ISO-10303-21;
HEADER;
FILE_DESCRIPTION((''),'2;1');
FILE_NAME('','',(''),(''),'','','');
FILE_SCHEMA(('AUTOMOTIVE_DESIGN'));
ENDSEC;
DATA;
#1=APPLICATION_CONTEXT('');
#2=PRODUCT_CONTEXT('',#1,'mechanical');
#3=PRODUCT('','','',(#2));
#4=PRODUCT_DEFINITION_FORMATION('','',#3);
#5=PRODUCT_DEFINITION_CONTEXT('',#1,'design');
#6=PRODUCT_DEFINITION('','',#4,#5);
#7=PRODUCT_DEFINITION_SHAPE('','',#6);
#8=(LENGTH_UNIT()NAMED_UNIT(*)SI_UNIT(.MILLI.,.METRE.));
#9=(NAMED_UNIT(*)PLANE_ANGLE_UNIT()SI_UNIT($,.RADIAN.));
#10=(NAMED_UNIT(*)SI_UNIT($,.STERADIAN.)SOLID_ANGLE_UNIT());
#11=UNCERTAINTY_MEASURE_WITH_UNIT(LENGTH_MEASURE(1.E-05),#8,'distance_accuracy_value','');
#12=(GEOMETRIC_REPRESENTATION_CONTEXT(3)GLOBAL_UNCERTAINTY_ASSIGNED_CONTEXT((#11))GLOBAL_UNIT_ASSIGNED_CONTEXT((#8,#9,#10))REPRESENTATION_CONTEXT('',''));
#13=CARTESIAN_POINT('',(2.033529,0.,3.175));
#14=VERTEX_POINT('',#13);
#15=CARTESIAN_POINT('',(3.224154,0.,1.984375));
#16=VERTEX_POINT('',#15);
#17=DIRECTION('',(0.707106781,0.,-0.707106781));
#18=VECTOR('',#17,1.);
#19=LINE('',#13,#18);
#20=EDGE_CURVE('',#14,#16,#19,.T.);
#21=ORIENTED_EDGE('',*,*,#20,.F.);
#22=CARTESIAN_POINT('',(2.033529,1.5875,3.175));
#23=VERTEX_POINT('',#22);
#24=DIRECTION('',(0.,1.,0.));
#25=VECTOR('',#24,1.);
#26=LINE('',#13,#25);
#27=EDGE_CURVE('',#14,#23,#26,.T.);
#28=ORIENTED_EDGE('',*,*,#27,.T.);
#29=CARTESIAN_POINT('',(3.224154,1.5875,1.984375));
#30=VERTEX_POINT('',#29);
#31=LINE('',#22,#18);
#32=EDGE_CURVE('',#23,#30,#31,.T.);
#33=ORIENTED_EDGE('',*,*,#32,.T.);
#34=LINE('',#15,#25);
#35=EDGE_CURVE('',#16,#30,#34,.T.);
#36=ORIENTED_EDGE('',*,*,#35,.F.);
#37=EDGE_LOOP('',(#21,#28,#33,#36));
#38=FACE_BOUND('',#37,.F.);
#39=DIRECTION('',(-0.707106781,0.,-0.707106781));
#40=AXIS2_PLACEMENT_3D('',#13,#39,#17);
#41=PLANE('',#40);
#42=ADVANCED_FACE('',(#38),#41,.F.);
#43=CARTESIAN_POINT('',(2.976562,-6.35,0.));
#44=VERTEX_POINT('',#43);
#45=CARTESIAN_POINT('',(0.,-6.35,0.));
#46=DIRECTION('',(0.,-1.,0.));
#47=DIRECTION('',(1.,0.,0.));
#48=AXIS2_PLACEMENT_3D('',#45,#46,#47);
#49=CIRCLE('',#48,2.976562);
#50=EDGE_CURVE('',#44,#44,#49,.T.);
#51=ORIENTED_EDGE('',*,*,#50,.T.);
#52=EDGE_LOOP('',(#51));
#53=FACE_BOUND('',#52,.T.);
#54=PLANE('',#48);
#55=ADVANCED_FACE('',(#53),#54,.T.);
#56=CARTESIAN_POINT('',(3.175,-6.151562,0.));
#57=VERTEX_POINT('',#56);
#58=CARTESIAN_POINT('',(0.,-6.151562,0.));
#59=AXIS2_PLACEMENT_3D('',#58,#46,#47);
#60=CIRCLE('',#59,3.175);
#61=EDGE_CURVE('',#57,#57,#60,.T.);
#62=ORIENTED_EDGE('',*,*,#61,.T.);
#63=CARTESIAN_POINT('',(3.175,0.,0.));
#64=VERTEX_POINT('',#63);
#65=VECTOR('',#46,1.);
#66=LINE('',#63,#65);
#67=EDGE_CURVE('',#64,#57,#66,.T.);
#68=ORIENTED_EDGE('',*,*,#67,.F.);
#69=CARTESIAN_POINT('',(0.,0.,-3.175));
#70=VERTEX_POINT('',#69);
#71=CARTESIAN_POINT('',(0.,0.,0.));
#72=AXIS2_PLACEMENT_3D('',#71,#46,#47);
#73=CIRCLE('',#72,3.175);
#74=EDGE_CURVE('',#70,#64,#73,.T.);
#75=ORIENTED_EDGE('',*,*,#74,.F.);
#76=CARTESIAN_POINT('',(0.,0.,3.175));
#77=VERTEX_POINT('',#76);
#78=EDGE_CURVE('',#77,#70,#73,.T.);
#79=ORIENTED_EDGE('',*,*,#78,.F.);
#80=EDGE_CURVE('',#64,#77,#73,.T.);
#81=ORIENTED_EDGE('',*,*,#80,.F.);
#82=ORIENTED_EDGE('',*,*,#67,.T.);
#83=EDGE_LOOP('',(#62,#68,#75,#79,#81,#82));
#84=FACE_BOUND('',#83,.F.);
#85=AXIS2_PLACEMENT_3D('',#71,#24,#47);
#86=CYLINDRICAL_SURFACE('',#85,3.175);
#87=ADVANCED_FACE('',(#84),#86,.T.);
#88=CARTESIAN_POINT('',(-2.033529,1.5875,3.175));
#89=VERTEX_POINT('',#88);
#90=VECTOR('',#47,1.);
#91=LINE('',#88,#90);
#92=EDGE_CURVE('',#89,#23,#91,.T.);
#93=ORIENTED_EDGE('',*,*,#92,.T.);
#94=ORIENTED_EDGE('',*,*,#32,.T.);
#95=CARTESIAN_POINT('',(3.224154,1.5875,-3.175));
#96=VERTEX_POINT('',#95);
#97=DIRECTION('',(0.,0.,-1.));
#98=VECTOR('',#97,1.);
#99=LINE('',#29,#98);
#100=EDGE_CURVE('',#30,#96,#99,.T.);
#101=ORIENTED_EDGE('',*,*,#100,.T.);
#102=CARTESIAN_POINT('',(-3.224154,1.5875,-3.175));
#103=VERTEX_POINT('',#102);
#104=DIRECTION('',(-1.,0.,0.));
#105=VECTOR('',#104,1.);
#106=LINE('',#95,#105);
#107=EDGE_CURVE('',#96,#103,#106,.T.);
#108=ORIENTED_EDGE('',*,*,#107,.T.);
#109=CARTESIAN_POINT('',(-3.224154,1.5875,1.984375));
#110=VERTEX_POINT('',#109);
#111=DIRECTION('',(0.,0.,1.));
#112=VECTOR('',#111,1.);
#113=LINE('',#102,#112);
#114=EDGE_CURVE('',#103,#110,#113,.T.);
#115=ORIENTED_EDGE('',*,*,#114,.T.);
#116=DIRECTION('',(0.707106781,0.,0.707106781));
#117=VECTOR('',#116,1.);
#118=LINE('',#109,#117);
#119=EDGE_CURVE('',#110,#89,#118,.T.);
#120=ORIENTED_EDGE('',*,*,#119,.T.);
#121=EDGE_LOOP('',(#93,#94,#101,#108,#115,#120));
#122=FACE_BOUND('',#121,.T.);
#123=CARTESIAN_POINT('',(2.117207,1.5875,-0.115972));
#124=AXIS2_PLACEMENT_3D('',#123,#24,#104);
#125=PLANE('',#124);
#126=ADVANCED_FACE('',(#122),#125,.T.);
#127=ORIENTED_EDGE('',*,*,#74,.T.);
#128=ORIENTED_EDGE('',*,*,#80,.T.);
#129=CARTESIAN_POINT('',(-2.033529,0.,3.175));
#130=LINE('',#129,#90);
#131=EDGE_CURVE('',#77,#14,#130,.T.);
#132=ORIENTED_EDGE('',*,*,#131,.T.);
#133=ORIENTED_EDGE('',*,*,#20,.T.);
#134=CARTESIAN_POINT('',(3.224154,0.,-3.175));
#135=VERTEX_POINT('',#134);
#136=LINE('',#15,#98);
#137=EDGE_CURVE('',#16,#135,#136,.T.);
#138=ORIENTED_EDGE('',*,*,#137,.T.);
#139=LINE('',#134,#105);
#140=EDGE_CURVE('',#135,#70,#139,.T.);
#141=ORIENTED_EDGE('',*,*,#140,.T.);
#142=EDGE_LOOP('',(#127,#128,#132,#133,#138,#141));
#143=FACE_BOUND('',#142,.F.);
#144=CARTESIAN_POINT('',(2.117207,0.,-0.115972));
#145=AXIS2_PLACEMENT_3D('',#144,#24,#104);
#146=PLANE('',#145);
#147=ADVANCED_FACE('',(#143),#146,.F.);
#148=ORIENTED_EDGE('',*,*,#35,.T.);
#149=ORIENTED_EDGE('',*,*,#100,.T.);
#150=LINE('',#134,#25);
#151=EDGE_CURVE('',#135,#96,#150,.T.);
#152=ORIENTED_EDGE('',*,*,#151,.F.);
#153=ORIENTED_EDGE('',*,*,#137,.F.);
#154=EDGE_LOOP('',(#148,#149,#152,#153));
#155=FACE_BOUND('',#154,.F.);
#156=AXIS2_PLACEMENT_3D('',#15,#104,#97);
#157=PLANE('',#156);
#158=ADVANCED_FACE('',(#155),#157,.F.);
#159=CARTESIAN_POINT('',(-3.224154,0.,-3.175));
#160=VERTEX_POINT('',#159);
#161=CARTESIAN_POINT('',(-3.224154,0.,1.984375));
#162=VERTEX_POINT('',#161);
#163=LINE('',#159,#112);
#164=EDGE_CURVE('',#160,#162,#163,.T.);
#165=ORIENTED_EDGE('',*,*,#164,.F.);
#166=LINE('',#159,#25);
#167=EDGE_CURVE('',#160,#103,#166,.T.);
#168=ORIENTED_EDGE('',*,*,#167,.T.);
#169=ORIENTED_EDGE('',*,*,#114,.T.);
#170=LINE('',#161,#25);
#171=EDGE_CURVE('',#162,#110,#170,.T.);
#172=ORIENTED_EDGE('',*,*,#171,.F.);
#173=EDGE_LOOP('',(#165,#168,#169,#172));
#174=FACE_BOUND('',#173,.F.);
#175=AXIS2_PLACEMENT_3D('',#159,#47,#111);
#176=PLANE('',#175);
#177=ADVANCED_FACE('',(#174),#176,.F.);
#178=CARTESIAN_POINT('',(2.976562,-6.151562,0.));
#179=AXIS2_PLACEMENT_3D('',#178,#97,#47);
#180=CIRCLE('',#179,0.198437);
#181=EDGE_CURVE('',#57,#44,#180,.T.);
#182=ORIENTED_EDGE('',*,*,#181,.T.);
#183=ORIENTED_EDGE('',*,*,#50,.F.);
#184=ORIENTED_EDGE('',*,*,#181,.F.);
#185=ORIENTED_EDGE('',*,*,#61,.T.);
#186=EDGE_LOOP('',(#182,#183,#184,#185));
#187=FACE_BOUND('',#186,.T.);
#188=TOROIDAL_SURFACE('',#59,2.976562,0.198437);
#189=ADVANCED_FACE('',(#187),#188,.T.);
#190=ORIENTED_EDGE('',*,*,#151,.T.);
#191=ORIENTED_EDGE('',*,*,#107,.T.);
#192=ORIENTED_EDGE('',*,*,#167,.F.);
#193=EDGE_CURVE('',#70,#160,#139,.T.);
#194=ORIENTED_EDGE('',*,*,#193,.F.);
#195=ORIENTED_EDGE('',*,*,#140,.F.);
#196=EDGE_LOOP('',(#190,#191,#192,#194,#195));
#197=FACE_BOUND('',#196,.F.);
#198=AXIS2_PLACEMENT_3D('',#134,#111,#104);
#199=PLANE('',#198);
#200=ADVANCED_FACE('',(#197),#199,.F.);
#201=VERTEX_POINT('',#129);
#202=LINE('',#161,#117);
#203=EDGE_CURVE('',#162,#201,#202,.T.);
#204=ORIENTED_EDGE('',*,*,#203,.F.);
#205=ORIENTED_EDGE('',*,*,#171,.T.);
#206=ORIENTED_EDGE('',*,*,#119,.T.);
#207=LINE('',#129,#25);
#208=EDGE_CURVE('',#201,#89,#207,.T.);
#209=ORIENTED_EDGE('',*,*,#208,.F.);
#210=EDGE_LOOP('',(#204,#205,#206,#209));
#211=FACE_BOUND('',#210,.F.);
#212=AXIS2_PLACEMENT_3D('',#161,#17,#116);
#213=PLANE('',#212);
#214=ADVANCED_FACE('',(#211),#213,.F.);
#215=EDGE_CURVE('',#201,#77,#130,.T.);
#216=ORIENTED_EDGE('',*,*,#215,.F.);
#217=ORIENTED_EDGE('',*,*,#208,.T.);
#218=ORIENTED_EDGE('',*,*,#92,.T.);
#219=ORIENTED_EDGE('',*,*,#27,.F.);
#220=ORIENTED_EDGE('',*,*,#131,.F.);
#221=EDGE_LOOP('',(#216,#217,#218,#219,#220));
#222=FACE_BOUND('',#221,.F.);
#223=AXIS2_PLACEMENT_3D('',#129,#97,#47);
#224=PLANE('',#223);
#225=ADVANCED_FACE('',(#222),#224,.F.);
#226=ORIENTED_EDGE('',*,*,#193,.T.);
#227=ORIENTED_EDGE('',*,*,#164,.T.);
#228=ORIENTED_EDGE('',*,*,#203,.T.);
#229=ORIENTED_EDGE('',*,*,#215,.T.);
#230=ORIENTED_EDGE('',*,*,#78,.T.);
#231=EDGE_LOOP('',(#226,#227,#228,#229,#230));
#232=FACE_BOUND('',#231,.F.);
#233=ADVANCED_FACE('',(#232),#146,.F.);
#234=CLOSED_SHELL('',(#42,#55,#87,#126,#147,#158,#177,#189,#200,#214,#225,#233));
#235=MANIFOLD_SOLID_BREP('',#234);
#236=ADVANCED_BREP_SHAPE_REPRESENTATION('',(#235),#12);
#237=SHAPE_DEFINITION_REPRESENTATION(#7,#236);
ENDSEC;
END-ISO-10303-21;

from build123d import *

# Parameters (mm, degrees)
F0_R     = 3.175
F1_DEPTH = 6.35
F3_DEPTH = 1.5875
F4_R     = 0.1984375


with BuildPart() as f1:
    # F0 (on Front) → F1 (new body)
    with BuildSketch(Plane.XZ):
        Circle(F0_R)
    extrude(amount=F1_DEPTH)

    # F2 (on face) → F3 (join)
    with BuildSketch(Plane(origin=(0, 0, 0), x_dir=(-1, 0, 0), z_dir=(0, 1, 0))):
        with BuildLine():
            Line((0, 3.175), (-2.033528515, 3.175))
            Line((-2.033528515, 3.175), (-3.224153515, 1.984375))
            Line((-3.224153515, 1.984375), (-3.224153515, -3.175))
            Line((-3.224153515, -3.175), (0, -3.175))
            ThreePointArc((0, -3.175), (-3.175, 0), (0, 3.175))
        make_face()
        with BuildLine():
            Line((2.033528515, 3.175), (0, 3.175))
            ThreePointArc((0, 3.175), (2.2450640303, 2.2450640303), (3.175, 0))
            ThreePointArc((3.175, 0), (2.2450640303, -2.2450640303), (0, -3.175))
            Line((0, -3.175), (3.224153515, -3.175))
            Line((3.224153515, -3.175), (3.224153515, 1.984375))
            Line((3.224153515, 1.984375), (2.033528515, 3.175))
        make_face()
        with BuildLine():
            ThreePointArc((3.175, 0), (2.2450640303, 2.2450640303), (0, 3.175))
            ThreePointArc((0, 3.175), (-3.175, 0), (0, -3.175))
            ThreePointArc((0, -3.175), (2.2450640303, -2.2450640303), (3.175, 0))
        make_face()
    extrude(amount=F3_DEPTH)

    # F4
    f4_edges = [f1.edges().sort_by_distance(p)[0] for p in [
        (-3.175, -6.35, 0),
    ]]
    fillet(f4_edges, radius=F4_R)


solid = f1.part
